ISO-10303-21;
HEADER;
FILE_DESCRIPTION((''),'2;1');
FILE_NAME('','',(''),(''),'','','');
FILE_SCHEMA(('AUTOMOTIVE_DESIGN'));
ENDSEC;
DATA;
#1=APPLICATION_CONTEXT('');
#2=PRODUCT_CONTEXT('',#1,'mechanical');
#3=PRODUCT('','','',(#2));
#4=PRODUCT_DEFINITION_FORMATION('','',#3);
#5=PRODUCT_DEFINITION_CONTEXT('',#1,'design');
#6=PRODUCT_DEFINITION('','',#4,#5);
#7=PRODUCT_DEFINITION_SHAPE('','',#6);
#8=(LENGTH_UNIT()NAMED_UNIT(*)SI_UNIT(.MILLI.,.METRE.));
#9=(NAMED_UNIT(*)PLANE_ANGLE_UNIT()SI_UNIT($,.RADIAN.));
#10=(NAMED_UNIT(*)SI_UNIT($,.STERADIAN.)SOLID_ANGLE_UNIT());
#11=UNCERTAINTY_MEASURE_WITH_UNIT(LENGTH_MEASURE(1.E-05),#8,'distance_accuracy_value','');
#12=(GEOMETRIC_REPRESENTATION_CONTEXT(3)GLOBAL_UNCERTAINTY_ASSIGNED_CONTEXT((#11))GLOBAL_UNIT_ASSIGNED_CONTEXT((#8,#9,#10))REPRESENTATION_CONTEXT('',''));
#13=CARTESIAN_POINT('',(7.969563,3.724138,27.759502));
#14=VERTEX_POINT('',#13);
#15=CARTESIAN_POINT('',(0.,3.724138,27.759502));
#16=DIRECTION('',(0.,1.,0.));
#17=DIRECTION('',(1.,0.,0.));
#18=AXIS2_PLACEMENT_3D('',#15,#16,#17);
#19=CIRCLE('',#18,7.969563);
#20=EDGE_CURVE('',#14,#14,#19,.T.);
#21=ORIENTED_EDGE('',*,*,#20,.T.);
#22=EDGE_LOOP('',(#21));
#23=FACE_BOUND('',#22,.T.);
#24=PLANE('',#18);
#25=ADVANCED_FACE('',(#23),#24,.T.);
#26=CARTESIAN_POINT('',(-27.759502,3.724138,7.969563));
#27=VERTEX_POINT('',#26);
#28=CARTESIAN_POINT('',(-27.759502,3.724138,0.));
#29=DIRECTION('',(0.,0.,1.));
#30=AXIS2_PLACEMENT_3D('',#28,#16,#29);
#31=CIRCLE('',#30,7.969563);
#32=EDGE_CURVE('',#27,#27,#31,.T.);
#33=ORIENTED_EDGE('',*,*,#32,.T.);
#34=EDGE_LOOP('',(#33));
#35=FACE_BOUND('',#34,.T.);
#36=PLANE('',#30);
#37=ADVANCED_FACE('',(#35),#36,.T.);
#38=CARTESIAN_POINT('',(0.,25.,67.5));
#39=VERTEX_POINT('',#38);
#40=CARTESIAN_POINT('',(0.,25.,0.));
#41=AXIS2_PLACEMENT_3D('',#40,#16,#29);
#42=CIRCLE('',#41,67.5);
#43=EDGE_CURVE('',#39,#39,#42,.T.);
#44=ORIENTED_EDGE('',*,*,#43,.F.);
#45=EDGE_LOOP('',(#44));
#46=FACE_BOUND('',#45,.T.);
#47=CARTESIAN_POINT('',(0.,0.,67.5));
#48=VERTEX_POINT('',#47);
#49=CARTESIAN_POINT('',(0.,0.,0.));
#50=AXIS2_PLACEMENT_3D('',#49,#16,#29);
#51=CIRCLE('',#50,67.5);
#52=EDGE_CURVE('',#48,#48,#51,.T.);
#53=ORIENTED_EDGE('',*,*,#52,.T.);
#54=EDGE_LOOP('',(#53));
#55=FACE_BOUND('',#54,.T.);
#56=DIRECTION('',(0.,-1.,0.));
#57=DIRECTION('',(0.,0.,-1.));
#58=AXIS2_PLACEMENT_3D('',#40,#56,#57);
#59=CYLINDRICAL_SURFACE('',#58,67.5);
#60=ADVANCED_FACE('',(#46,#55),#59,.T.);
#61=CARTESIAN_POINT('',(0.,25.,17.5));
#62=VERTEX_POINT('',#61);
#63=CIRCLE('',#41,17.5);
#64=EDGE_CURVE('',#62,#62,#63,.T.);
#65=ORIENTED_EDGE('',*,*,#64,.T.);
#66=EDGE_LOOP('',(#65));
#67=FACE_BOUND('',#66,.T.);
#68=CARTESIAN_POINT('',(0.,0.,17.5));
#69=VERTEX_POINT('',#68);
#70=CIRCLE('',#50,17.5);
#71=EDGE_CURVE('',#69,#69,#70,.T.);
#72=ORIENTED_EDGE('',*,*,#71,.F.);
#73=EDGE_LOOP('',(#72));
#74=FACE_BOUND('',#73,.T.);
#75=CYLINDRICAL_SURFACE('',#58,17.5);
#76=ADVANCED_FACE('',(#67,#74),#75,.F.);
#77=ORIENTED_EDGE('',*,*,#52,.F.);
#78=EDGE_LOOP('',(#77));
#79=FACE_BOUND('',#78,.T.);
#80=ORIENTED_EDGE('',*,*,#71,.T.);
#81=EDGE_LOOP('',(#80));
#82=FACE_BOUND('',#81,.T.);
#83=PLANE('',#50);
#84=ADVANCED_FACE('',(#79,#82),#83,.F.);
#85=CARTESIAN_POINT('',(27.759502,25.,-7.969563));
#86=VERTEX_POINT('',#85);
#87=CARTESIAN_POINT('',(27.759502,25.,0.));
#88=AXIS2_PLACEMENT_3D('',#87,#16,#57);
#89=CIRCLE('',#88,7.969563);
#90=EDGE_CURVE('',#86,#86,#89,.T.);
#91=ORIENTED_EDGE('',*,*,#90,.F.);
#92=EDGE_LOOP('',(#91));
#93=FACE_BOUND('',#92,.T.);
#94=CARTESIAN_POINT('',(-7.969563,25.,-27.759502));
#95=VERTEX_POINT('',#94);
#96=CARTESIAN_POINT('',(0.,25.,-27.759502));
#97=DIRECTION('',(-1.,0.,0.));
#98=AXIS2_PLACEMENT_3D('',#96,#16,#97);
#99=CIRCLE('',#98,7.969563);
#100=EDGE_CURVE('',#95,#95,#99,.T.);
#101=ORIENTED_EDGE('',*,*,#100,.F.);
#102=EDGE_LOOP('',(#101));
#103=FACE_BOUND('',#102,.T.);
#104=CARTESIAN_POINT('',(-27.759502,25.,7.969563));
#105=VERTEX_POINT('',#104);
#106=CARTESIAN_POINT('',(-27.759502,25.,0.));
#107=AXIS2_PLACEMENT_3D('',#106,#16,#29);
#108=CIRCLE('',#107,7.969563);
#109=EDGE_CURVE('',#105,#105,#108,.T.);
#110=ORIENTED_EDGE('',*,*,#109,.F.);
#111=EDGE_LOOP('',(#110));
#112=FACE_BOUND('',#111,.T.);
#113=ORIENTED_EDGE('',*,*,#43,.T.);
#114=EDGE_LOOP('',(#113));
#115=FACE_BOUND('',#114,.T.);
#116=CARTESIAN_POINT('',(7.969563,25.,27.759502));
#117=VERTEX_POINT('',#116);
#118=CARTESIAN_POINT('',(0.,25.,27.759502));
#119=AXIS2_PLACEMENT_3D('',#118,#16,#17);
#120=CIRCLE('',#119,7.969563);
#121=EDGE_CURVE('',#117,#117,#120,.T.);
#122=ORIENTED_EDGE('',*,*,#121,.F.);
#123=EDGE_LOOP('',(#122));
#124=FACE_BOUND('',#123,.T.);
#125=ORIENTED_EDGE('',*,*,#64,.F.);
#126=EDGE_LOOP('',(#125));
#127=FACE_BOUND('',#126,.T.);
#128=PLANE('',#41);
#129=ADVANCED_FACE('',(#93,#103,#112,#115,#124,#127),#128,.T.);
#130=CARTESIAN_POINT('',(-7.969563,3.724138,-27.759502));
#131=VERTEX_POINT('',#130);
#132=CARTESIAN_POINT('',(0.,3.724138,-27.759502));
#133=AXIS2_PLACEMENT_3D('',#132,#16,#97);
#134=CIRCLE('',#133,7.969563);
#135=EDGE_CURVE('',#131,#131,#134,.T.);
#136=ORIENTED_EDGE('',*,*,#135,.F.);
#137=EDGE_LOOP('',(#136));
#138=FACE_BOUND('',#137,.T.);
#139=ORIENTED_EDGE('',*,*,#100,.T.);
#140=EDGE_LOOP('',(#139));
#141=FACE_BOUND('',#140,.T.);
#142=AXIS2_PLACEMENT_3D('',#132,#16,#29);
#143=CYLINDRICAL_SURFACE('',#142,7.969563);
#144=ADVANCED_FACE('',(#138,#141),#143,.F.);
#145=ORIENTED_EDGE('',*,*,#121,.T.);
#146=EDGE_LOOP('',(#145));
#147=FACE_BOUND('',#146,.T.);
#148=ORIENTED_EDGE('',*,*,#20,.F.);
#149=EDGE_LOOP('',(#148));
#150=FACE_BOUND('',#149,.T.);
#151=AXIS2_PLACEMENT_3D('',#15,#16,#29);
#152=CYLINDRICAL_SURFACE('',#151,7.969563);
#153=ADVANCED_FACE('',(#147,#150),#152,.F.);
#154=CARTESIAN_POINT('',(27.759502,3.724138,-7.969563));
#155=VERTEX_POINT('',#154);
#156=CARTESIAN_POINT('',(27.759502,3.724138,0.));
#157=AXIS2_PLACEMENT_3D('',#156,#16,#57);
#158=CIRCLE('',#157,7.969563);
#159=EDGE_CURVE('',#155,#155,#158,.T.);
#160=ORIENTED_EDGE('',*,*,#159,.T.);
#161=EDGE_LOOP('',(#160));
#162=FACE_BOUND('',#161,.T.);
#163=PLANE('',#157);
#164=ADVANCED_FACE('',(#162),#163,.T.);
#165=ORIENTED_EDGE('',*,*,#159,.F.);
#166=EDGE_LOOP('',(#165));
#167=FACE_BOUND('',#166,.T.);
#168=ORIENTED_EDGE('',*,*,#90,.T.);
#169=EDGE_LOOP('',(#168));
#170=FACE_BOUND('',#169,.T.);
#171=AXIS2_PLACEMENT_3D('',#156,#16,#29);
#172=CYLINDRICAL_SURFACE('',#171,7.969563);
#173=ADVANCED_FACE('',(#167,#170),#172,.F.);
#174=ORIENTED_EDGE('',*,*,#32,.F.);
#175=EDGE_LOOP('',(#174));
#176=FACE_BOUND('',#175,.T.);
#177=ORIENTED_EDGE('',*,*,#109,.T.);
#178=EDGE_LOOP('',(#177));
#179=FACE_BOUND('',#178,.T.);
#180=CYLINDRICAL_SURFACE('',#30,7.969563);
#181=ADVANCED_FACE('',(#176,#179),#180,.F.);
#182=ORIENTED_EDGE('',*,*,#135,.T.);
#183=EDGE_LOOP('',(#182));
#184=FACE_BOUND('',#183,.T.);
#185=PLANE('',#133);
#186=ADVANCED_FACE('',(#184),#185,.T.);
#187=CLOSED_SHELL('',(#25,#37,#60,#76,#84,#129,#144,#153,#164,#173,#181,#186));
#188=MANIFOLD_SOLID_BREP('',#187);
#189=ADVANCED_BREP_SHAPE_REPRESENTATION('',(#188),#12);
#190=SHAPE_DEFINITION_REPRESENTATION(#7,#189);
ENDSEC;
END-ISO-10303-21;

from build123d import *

# Parameters (mm, degrees)
SKETCH1_R           = 67.5
BOSS_EXTRUDE1_DEPTH = 25
SKETCH2_R           = 17.5
CUT_EXTRUDE1_DEPTH  = 99.67877178
SKETCH3_R           = 7.969562978
CUT_EXTRUDE2_DEPTH  = 21.275861771
CIRPATTERN1_COUNT   = 4


with BuildPart() as part:
    # Sketch1 → Boss-Extrude1 (new body)
    with BuildSketch(Plane(origin=(0, 0, 0), x_dir=(1, 0, 0), z_dir=(0, 1, 0))):
        Circle(SKETCH1_R)
    extrude(amount=BOSS_EXTRUDE1_DEPTH)

    # Sketch2 → Cut-Extrude1 (cut, through all)
    with BuildSketch(Plane(origin=(0, 0, 0), x_dir=(1, 0, 0), z_dir=(0, 1, 0))):
        Circle(SKETCH2_R)
    extrude(amount=CUT_EXTRUDE1_DEPTH, mode=Mode.SUBTRACT)

    # Sketch3 → Cut-Extrude2 (cut)
    with BuildSketch(Plane(origin=(0, 25, 0), x_dir=(1, 0, 0), z_dir=(0, 1, 0))):
        with Locations((-27.759501712, 0)):
            Circle(SKETCH3_R)
    cut_extrude2 = extrude(amount=-CUT_EXTRUDE2_DEPTH, mode=Mode.SUBTRACT)

    # CirPattern1: Cut-Extrude2 ×4 about axis
    cirpattern1_axis = Axis((0, 0, 0), (0, 1, 0))
    for i in range(1, CIRPATTERN1_COUNT):
        add(cut_extrude2.rotate(cirpattern1_axis, i * 360 / CIRPATTERN1_COUNT), mode=Mode.SUBTRACT)


solid = part.part
